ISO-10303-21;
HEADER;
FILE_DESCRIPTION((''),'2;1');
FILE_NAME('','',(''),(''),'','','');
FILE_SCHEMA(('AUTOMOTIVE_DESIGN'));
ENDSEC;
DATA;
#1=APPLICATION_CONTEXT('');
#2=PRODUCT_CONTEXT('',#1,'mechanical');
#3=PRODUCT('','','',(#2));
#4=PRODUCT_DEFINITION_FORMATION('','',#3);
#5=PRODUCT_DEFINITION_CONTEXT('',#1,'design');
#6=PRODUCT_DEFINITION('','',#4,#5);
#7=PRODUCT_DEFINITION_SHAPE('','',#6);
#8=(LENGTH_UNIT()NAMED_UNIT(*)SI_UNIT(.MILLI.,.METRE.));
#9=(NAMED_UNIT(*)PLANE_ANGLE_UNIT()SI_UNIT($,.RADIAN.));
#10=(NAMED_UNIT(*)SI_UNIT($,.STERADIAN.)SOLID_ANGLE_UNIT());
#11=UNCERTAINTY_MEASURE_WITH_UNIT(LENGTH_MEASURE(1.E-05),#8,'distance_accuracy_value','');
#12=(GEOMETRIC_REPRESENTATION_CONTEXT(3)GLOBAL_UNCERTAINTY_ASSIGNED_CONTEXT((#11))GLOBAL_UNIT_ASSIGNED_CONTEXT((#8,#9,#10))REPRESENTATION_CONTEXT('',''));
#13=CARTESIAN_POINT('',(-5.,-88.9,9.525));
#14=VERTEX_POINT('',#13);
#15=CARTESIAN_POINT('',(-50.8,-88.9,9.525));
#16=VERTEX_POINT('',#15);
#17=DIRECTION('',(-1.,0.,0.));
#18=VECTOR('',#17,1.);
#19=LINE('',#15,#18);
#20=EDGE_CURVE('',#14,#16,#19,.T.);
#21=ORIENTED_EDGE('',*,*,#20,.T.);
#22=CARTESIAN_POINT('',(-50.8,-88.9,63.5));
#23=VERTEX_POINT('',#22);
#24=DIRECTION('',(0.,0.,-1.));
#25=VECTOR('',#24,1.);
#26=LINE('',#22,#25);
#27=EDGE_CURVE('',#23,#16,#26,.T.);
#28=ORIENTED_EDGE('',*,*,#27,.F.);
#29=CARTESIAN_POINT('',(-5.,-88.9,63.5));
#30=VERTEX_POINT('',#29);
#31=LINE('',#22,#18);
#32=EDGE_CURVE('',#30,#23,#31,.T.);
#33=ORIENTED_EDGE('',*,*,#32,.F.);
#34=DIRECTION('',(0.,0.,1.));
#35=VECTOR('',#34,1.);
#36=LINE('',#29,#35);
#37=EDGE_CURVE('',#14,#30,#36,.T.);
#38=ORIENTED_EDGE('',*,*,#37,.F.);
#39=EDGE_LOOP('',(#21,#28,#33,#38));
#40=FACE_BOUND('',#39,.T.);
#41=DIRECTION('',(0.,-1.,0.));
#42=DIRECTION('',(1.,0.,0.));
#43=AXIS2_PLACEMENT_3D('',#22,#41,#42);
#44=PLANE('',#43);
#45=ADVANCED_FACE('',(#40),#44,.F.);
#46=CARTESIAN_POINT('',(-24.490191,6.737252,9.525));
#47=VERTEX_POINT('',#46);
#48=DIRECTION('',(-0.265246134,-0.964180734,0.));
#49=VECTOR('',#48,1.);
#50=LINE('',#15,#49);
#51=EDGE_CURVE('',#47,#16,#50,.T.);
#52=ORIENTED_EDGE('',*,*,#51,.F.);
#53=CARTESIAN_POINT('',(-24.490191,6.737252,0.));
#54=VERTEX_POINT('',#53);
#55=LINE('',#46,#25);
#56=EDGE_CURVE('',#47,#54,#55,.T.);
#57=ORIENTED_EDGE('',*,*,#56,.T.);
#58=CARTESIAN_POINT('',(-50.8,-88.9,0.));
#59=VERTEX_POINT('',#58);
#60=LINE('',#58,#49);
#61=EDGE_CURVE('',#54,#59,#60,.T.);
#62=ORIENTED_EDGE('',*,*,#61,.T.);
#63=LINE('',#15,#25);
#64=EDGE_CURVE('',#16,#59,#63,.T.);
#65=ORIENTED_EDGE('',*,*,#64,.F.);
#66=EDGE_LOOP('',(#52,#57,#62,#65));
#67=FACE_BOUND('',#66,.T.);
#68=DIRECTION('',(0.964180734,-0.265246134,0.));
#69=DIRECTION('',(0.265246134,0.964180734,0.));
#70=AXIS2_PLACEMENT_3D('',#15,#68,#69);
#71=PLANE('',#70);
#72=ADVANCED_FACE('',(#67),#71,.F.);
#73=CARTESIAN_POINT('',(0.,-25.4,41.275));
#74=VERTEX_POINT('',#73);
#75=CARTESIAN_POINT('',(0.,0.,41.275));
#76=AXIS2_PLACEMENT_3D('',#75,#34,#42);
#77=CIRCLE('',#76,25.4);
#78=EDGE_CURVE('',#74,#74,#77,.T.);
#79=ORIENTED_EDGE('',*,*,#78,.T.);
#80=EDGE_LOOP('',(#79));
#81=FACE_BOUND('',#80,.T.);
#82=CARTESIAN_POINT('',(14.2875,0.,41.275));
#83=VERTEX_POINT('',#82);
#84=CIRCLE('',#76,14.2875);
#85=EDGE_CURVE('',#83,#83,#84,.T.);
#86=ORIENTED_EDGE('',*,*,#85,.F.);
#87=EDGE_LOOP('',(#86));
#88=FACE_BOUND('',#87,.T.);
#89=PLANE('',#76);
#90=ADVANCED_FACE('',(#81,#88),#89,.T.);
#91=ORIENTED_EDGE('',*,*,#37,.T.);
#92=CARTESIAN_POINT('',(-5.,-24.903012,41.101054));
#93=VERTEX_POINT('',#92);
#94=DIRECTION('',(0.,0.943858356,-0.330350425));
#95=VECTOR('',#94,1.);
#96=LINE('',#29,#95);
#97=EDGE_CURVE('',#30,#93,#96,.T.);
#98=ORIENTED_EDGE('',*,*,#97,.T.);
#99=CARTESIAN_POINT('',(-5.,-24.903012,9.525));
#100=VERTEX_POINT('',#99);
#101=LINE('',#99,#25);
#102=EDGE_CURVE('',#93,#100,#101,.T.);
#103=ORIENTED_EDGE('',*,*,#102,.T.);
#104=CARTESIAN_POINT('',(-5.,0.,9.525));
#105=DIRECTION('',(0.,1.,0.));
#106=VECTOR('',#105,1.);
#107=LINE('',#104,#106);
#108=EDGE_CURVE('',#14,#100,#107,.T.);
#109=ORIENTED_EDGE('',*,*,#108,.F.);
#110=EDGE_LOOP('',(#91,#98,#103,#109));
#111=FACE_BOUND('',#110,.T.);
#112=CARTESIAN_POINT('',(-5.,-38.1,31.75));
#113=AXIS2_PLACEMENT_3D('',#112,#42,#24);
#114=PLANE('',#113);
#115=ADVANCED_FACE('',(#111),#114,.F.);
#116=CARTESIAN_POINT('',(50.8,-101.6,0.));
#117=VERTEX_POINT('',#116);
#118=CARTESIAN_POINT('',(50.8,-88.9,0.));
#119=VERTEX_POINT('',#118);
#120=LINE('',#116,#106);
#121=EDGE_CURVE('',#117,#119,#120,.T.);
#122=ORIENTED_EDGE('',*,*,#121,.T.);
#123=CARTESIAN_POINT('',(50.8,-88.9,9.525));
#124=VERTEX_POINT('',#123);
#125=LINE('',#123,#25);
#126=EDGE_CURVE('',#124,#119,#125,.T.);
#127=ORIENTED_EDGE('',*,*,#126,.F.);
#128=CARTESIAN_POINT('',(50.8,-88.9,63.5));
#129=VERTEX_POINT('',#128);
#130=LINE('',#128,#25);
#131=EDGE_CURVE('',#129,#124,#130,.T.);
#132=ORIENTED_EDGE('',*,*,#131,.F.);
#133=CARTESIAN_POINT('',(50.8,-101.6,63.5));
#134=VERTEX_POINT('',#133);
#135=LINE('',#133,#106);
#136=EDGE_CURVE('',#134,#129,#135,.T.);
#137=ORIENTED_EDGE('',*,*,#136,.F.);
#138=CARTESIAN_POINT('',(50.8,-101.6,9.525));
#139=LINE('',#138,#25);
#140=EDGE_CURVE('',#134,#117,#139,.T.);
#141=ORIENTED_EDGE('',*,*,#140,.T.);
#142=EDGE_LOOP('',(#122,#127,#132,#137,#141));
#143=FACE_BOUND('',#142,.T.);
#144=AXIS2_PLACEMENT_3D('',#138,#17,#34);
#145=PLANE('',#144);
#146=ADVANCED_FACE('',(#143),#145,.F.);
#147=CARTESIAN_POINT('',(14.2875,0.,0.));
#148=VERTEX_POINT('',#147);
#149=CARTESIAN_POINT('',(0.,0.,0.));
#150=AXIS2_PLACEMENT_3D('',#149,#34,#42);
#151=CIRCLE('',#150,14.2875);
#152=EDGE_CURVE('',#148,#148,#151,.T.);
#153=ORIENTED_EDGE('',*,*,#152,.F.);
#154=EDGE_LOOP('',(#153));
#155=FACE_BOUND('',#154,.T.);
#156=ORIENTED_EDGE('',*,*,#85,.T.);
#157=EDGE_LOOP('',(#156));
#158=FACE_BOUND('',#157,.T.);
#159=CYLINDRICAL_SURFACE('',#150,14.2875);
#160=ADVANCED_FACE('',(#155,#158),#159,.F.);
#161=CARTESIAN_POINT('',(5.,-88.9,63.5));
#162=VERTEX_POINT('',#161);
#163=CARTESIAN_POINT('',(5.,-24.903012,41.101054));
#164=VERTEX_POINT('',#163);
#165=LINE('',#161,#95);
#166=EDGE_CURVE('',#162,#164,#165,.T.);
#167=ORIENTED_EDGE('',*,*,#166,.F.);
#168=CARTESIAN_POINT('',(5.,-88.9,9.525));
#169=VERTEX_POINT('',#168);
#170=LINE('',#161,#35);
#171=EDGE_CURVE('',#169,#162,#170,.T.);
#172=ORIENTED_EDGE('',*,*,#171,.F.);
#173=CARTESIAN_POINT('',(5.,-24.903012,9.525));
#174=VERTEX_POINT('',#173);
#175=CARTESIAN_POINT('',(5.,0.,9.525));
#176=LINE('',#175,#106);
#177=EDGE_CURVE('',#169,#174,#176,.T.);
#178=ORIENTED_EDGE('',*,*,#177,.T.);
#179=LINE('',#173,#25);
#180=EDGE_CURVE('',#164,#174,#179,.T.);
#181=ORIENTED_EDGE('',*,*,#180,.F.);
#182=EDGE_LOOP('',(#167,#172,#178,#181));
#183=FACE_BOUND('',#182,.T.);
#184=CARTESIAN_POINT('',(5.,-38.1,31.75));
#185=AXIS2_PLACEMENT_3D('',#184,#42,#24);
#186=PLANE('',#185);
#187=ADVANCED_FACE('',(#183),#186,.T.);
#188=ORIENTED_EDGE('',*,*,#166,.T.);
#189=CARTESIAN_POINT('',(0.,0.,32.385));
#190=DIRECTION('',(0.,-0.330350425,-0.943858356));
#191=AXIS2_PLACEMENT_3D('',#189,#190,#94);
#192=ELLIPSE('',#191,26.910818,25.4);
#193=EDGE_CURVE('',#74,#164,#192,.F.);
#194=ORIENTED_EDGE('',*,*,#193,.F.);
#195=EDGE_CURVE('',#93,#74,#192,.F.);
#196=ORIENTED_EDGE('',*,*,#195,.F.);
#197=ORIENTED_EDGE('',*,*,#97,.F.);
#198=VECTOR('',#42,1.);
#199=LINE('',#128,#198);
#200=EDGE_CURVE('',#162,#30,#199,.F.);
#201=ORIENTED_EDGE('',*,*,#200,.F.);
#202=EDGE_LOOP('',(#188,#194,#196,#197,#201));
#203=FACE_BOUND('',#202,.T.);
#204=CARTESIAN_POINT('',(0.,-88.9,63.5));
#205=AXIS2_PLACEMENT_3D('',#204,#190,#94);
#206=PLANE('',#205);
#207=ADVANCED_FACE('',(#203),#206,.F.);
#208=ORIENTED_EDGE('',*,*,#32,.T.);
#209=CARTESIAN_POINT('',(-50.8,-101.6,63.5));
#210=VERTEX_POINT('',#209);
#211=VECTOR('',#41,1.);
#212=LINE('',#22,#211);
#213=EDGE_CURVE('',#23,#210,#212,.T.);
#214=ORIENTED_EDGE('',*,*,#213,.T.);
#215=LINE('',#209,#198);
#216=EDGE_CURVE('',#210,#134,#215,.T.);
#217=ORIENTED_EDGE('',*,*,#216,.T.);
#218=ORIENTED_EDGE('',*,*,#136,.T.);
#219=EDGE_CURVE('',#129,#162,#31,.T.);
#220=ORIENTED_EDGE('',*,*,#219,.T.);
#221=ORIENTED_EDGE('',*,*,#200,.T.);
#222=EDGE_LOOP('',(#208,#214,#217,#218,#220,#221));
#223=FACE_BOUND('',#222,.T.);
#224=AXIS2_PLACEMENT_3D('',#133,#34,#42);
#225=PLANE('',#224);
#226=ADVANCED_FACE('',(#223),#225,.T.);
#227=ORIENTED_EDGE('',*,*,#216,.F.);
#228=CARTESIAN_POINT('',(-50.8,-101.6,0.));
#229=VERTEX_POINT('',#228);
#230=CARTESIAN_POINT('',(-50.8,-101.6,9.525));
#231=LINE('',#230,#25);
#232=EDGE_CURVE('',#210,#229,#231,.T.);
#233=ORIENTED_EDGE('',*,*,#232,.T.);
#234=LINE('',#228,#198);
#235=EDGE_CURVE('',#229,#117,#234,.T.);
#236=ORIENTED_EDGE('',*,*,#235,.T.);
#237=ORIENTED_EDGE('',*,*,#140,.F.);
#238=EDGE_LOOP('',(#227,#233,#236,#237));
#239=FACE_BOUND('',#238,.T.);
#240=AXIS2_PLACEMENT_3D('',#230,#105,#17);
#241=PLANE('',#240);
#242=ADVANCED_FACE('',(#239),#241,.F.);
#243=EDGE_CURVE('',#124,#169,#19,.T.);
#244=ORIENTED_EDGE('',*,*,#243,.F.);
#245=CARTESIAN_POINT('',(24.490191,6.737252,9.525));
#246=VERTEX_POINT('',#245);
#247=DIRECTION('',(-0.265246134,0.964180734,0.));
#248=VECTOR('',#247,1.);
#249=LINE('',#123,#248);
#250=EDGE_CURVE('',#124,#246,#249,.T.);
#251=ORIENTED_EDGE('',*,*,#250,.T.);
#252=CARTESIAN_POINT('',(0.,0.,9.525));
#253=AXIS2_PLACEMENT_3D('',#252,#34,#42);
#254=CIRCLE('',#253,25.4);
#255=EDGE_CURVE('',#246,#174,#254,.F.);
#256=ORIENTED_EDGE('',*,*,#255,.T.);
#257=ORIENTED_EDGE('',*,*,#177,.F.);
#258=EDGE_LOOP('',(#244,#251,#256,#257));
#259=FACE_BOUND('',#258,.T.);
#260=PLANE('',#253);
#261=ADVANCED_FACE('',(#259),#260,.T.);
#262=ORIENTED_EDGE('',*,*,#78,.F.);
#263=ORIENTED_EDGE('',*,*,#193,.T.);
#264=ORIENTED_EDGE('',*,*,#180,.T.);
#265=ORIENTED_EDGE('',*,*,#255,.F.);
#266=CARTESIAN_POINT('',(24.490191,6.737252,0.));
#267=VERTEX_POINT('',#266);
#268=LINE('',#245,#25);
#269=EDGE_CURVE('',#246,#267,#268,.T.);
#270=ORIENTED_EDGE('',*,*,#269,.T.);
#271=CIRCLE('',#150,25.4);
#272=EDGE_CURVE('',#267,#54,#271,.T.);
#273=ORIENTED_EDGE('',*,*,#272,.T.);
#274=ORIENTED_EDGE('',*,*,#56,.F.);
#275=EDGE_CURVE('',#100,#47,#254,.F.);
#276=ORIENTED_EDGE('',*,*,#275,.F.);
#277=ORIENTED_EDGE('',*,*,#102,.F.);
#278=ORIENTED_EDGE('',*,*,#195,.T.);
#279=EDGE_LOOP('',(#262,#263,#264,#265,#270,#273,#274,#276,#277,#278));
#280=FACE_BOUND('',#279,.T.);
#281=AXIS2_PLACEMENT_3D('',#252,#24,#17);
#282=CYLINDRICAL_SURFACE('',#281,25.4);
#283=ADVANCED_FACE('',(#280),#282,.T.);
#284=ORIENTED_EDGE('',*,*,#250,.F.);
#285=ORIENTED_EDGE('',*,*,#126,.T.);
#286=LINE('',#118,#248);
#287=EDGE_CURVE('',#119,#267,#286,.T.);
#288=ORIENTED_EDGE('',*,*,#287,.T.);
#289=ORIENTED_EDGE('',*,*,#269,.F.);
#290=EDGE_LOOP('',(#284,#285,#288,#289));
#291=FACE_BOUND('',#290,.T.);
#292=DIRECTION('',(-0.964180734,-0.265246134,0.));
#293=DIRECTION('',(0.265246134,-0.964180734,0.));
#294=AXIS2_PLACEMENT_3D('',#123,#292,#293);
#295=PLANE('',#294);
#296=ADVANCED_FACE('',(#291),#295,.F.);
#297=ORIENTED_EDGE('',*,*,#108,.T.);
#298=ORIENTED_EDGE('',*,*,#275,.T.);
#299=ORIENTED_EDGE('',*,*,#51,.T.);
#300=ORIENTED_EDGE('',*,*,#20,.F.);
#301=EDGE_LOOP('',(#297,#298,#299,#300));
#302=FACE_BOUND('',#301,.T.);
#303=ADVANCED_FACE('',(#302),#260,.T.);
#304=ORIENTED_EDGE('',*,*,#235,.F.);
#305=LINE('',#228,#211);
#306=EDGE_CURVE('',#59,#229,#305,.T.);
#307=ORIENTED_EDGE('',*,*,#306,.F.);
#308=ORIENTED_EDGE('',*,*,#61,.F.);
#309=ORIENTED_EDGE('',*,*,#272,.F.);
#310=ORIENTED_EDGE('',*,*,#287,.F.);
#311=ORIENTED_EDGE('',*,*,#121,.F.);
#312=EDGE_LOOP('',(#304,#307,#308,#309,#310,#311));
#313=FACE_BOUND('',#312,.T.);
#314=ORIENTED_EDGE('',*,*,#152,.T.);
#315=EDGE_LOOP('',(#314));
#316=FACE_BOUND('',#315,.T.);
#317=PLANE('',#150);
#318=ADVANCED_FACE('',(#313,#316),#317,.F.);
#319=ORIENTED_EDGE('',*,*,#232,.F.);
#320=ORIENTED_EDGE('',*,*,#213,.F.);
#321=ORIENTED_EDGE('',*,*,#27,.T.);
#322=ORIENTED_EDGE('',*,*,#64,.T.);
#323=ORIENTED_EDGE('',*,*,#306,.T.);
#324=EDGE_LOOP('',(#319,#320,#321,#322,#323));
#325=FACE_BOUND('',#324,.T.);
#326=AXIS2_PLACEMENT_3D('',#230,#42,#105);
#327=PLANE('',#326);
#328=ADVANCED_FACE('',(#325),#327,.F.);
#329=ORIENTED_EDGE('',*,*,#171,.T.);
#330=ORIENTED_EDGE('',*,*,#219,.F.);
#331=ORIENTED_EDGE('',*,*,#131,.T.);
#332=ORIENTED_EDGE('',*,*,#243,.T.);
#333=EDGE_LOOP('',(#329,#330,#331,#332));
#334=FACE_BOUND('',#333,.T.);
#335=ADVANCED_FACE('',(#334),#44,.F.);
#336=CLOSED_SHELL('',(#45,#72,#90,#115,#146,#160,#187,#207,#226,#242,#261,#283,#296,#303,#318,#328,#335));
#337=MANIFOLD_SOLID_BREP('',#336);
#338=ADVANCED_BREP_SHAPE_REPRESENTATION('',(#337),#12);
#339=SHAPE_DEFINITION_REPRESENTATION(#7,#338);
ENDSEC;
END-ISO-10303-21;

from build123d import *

# Parameters (mm, degrees)
BASE_EXTRUDE_DEPTH  = 9.525
BOSS_EXTRUDE1_DEPTH = 53.974999999999994
SKETCH3_R           = 25.400000000000002
BOSS_EXTRUDE2_DEPTH = 31.75
SKETCH4_R           = 14.287500000000001
CUT_EXTRUDE1_DEPTH  = 121.85870107278168
RIB1_REACH          = 132.136
SKETCH5_WALL_W      = 329.54959327419806
SKETCH5_WALL_H      = 10


with BuildPart() as part:
    # Sketch1 → Base-Extrude (new body)
    with BuildSketch(Plane.XY):
        with BuildLine():
            Line((-50.800000000000004, -101.6), (50.79999999999999, -101.59999999999998))
            Line((50.79999999999999, -101.59999999999998), (50.79999999999999, -88.9))
            Line((50.79999999999999, -88.9), (24.490190651941575, 6.737251801109487))
            ThreePointArc((24.490190651941575, 6.737251801109487), (-4.08e-15, 25.39999999999999), (-24.490190651941617, 6.737251801109478))
            Line((-24.490190651941617, 6.737251801109478), (-50.79999999999999, -88.90000000000002))
            Line((-50.79999999999999, -88.90000000000002), (-50.800000000000004, -101.6))
        make_face()
    extrude(amount=BASE_EXTRUDE_DEPTH)

    # Sketch2 → Boss-Extrude1 (add)
    with BuildSketch(Plane.XY.offset(9.525)):
        Polygon((50.79999999999999, -101.59999999999998), (50.79999999999999, -88.9), (-50.79999999999999, -88.90000000000002), (-50.800000000000004, -101.6), align=None)
    extrude(amount=BOSS_EXTRUDE1_DEPTH)

    # Sketch3 → Boss-Extrude2 (add)
    with BuildSketch(Plane.XY.offset(9.525)):
        Circle(SKETCH3_R)
    extrude(amount=BOSS_EXTRUDE2_DEPTH)

    # Sketch4 → Cut-Extrude1 (cut, through all)
    with BuildSketch(Plane.XY.offset(41.275)):
        Circle(SKETCH4_R)
    extrude(amount=-CUT_EXTRUDE1_DEPTH, mode=Mode.SUBTRACT)

    # Sketch5 wall → Rib1 (add, up to next)
    with BuildSketch(Plane(origin=(0, -57.15, 52.3875), x_dir=(0, 0.943858356366, -0.330350424728), z_dir=(0, 0.330350424728, 0.943858356366)), mode=Mode.PRIVATE) as rib1_sk1:
        Rectangle(SKETCH5_WALL_W, SKETCH5_WALL_H)
    rib1_tool1 = extrude(rib1_sk1.sketch, amount=-RIB1_REACH, mode=Mode.PRIVATE) - part.part
    add(rib1_tool1.solids().sort_by_distance((0, -57.15, 52.3875))[0])


solid = part.part
